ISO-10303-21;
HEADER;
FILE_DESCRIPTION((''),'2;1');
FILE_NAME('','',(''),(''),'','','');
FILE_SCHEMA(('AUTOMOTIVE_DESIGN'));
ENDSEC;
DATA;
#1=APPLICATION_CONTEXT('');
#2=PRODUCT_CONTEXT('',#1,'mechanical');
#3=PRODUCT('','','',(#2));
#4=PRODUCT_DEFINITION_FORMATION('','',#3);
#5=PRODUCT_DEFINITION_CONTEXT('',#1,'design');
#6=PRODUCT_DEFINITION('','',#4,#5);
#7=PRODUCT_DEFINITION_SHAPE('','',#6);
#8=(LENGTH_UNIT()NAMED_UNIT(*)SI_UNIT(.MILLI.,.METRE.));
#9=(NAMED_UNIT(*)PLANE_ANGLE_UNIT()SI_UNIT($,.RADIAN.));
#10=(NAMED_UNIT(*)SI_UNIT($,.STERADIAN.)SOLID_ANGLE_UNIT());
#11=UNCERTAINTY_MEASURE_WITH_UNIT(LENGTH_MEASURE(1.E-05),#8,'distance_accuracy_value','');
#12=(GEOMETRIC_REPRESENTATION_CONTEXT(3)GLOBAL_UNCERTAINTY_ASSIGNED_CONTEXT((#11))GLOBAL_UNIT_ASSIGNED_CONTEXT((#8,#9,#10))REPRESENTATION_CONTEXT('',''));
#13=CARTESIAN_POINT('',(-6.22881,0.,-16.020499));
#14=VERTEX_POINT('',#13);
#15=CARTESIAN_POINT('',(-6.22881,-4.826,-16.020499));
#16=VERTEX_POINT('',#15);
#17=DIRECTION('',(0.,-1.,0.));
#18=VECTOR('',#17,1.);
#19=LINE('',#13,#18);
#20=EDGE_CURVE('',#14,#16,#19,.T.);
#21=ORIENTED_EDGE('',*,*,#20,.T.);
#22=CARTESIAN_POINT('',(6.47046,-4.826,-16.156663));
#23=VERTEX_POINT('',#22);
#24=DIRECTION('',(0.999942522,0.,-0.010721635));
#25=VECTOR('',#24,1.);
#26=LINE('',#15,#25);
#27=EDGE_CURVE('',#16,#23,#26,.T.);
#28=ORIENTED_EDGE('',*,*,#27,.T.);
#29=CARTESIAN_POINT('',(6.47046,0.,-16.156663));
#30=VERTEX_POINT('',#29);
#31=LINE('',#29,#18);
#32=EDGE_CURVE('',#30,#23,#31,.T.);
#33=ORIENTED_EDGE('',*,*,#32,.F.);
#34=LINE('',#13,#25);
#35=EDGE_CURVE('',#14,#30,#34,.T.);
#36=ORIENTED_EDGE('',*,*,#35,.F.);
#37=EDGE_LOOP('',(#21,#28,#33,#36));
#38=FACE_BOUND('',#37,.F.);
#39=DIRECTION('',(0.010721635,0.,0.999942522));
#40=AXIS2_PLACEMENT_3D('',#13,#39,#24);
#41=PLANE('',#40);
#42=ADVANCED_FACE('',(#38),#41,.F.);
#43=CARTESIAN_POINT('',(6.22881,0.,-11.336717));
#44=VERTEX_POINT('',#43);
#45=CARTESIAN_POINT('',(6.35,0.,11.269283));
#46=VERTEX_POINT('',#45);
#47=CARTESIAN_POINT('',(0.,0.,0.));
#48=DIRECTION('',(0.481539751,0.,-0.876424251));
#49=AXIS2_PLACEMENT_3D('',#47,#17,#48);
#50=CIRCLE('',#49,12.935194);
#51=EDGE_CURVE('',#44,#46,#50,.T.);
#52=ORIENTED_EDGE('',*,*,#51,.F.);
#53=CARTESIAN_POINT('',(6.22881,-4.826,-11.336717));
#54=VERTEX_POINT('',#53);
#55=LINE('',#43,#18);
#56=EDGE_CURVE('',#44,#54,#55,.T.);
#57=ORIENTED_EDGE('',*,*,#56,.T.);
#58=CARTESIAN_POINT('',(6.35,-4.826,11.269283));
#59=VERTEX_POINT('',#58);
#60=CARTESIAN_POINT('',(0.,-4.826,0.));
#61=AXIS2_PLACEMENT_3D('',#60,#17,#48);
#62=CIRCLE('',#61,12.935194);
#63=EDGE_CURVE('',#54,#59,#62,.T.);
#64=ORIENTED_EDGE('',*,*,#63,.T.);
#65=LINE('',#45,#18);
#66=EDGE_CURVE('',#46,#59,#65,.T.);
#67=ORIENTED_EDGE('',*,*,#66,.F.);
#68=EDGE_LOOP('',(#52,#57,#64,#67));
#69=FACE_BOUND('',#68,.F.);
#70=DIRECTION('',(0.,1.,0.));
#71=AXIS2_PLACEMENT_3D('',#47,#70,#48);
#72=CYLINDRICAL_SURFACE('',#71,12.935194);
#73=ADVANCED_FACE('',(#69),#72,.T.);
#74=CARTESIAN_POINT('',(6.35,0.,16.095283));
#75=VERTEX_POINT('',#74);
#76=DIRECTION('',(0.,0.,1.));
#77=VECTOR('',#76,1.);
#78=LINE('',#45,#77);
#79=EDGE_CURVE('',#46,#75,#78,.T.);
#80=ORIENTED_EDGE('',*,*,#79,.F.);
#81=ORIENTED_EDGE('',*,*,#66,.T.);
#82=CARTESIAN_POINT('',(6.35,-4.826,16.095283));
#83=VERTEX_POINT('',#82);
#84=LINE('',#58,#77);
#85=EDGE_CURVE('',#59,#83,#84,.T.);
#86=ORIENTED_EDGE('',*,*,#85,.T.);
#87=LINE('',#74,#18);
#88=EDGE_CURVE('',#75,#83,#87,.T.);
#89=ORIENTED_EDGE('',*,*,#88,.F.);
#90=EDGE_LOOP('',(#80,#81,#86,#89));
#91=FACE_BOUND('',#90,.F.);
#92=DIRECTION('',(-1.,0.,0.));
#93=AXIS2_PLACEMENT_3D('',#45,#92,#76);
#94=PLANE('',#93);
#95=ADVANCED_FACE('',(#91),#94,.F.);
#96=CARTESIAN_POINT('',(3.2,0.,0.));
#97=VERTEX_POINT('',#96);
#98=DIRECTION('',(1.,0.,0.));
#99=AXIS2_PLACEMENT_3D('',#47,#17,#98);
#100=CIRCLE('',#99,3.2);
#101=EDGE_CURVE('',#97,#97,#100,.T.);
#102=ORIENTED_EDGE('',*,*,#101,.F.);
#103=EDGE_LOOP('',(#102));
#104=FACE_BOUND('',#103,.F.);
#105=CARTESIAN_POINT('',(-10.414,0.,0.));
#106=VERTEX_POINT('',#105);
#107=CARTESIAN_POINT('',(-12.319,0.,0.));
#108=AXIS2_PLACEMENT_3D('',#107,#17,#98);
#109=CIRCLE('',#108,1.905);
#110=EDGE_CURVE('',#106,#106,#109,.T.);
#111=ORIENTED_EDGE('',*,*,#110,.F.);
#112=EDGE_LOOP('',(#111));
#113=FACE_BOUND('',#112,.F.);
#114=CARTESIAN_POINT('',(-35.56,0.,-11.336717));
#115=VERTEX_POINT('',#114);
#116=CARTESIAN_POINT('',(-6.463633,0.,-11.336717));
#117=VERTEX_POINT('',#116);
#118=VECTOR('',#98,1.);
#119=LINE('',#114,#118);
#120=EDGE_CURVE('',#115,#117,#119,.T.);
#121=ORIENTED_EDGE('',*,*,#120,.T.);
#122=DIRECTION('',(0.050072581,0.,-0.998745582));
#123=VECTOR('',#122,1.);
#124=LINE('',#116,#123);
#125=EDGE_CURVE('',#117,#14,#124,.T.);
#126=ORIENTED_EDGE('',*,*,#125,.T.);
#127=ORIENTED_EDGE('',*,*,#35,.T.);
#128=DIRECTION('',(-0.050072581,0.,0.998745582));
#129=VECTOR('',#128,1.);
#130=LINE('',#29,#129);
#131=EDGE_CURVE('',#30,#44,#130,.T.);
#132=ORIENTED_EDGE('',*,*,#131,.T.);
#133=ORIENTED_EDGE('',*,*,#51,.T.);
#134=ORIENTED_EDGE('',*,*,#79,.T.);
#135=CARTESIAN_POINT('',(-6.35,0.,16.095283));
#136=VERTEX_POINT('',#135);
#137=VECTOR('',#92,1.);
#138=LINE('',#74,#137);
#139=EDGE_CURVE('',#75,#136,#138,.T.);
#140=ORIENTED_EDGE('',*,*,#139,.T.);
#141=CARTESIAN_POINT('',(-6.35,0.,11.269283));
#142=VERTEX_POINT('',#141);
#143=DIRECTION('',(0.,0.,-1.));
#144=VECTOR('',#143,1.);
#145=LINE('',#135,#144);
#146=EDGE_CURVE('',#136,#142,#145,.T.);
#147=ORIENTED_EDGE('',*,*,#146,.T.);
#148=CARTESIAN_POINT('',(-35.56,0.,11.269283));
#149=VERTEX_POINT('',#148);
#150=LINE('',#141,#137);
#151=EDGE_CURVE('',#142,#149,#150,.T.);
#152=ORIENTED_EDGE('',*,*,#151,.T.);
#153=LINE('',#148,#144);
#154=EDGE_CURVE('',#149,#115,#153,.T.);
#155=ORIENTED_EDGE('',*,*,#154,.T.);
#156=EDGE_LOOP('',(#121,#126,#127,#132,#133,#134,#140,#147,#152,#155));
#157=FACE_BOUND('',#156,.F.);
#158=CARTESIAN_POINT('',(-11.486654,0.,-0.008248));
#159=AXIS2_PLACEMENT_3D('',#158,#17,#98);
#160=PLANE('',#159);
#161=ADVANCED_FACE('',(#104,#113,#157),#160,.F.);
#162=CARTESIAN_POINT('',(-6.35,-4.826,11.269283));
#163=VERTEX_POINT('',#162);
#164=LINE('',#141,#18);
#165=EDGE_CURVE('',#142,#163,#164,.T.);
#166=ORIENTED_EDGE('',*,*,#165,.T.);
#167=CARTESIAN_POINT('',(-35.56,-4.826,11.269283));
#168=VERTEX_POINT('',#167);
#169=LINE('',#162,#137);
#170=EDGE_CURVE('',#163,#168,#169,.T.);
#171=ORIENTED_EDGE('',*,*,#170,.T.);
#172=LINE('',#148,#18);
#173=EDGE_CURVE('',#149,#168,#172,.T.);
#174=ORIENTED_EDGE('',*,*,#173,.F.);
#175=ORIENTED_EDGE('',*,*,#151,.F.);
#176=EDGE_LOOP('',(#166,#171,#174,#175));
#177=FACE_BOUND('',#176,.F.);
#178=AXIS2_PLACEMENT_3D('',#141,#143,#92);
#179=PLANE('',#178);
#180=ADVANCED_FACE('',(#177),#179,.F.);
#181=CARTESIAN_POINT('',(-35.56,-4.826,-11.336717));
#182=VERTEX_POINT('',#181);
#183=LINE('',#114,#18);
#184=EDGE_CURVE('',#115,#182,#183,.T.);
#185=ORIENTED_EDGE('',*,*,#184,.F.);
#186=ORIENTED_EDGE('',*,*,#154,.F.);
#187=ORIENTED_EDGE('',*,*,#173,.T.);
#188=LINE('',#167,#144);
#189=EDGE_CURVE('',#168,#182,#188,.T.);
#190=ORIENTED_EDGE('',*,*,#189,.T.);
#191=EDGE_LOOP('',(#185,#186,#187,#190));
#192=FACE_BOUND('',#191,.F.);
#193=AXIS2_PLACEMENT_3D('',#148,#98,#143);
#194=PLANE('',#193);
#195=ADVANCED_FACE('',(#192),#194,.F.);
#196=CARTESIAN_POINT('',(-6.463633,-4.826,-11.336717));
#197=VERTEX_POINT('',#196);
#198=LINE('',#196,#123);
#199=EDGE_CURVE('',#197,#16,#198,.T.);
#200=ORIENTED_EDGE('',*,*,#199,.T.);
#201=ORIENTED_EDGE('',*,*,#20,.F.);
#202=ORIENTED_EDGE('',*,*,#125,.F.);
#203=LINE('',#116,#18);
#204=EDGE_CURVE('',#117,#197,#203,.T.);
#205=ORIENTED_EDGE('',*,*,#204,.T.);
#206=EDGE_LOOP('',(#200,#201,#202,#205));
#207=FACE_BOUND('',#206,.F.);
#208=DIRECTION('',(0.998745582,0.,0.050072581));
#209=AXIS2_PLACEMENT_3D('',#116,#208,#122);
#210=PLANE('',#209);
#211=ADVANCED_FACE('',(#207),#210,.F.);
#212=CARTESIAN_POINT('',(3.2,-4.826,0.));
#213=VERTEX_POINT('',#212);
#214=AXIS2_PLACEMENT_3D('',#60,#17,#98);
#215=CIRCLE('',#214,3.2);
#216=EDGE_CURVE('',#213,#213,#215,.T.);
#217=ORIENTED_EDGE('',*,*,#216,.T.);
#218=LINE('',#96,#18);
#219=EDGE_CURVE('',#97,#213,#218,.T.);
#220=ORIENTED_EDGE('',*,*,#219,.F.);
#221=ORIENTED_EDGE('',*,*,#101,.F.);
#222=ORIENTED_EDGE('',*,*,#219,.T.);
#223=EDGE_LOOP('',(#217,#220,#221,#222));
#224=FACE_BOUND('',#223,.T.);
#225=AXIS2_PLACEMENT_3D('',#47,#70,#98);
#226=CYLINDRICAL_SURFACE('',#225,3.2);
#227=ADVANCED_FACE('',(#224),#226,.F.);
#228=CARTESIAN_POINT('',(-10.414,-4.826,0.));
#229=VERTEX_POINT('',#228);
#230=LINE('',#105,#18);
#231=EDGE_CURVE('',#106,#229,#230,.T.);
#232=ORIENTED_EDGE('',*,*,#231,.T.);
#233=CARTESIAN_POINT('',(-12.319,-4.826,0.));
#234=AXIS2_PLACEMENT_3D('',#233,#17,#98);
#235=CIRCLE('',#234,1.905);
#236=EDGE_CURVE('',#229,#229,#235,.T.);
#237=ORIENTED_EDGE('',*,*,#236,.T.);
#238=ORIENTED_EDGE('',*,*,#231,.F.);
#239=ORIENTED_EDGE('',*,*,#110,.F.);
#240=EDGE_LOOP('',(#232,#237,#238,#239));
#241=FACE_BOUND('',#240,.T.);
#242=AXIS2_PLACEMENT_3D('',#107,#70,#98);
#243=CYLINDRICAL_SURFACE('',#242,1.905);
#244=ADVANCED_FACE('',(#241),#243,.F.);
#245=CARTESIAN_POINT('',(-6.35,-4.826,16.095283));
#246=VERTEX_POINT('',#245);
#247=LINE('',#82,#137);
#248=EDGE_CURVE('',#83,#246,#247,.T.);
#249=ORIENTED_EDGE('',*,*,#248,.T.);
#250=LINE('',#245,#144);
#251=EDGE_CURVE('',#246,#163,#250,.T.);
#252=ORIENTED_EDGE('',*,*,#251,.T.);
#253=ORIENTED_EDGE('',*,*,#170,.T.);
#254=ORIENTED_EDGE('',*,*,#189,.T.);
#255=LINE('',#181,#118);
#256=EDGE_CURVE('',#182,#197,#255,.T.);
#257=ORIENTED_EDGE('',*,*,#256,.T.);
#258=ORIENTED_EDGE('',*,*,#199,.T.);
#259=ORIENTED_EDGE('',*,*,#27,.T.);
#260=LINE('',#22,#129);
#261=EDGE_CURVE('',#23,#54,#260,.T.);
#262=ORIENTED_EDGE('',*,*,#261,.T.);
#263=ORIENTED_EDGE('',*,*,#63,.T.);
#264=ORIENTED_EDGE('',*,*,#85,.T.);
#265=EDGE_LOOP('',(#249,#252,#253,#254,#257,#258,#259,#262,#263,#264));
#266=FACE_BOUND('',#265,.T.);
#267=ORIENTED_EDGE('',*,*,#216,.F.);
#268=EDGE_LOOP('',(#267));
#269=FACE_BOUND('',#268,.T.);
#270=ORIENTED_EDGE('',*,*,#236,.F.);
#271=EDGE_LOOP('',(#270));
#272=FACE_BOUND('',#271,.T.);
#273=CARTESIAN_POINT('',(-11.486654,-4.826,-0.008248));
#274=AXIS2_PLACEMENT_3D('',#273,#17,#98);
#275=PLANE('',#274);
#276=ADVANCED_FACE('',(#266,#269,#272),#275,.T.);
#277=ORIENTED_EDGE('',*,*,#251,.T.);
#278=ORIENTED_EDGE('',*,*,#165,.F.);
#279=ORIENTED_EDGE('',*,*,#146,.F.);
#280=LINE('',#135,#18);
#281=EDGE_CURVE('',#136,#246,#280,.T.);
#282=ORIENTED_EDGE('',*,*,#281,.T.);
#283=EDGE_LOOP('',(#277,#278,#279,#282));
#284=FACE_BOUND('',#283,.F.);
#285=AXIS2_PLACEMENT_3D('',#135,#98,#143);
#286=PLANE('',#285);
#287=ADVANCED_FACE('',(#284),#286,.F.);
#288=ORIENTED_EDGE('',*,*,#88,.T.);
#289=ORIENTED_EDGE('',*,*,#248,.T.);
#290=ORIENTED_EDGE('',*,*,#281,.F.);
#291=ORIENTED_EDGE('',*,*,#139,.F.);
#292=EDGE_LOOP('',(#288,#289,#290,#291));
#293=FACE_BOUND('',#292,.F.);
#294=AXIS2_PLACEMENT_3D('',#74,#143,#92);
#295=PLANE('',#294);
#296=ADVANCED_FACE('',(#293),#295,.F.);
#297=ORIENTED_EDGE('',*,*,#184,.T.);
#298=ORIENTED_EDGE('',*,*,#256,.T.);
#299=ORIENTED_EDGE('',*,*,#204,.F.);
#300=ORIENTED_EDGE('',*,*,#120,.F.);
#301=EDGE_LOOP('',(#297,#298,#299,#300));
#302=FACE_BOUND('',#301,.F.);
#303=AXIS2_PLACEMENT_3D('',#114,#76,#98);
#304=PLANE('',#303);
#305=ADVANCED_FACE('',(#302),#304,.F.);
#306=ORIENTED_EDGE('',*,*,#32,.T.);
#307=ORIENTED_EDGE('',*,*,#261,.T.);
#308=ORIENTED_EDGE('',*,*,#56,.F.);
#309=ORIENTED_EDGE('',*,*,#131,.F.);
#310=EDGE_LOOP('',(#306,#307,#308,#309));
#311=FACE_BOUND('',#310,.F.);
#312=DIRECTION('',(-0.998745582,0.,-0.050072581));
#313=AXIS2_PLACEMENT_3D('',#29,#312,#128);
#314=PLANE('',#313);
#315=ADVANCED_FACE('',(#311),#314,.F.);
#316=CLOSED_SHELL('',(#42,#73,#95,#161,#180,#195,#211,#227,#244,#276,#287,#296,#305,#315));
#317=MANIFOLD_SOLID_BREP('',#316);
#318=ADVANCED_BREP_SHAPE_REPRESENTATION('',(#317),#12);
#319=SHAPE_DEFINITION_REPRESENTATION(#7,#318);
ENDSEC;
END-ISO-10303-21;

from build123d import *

# Parameters (mm, degrees)
F0_R     = 1.905
F0_R_2   = 3.2
F1_DEPTH = 4.826


# Not quite as in the source:
# - a feature names something its author has since deleted; it is built from what else it names


with BuildPart() as f1:
    # F0 (on Front) → F1 (new body)
    with BuildSketch(Plane.XZ):
        with BuildLine():
            Line((-6.2288098753, -16.020498732), (6.4704601492, -16.156663498))
            Line((6.4704601492, -16.156663498), (6.2288098753, -11.3367173214))
            ThreePointArc((6.2288098753, -11.3367173214), (12.9350076718, -0.0693442092), (6.35, 11.2692826786))
            Line((6.35, 11.2692826786), (6.35, 16.0952826786))
            Line((6.35, 16.0952826786), (-6.35, 16.0952826786))
            Line((-6.35, 16.0952826786), (-6.35, 11.2692826786))
            Line((-6.35, 11.2692826786), (-35.56, 11.2692826786))
            Line((-35.56, 11.2692826786), (-35.56, -11.3367173214))
            Line((-35.56, -11.3367173214), (-6.4636334645, -11.3367173214))
            Line((-6.4636334645, -11.3367173214), (-6.2288098753, -16.020498732))
        make_face()
        with Locations((-12.319, 0)):
            Circle(F0_R, mode=Mode.SUBTRACT)
        Circle(F0_R_2, mode=Mode.SUBTRACT)
    extrude(amount=F1_DEPTH)


solid = f1.part
